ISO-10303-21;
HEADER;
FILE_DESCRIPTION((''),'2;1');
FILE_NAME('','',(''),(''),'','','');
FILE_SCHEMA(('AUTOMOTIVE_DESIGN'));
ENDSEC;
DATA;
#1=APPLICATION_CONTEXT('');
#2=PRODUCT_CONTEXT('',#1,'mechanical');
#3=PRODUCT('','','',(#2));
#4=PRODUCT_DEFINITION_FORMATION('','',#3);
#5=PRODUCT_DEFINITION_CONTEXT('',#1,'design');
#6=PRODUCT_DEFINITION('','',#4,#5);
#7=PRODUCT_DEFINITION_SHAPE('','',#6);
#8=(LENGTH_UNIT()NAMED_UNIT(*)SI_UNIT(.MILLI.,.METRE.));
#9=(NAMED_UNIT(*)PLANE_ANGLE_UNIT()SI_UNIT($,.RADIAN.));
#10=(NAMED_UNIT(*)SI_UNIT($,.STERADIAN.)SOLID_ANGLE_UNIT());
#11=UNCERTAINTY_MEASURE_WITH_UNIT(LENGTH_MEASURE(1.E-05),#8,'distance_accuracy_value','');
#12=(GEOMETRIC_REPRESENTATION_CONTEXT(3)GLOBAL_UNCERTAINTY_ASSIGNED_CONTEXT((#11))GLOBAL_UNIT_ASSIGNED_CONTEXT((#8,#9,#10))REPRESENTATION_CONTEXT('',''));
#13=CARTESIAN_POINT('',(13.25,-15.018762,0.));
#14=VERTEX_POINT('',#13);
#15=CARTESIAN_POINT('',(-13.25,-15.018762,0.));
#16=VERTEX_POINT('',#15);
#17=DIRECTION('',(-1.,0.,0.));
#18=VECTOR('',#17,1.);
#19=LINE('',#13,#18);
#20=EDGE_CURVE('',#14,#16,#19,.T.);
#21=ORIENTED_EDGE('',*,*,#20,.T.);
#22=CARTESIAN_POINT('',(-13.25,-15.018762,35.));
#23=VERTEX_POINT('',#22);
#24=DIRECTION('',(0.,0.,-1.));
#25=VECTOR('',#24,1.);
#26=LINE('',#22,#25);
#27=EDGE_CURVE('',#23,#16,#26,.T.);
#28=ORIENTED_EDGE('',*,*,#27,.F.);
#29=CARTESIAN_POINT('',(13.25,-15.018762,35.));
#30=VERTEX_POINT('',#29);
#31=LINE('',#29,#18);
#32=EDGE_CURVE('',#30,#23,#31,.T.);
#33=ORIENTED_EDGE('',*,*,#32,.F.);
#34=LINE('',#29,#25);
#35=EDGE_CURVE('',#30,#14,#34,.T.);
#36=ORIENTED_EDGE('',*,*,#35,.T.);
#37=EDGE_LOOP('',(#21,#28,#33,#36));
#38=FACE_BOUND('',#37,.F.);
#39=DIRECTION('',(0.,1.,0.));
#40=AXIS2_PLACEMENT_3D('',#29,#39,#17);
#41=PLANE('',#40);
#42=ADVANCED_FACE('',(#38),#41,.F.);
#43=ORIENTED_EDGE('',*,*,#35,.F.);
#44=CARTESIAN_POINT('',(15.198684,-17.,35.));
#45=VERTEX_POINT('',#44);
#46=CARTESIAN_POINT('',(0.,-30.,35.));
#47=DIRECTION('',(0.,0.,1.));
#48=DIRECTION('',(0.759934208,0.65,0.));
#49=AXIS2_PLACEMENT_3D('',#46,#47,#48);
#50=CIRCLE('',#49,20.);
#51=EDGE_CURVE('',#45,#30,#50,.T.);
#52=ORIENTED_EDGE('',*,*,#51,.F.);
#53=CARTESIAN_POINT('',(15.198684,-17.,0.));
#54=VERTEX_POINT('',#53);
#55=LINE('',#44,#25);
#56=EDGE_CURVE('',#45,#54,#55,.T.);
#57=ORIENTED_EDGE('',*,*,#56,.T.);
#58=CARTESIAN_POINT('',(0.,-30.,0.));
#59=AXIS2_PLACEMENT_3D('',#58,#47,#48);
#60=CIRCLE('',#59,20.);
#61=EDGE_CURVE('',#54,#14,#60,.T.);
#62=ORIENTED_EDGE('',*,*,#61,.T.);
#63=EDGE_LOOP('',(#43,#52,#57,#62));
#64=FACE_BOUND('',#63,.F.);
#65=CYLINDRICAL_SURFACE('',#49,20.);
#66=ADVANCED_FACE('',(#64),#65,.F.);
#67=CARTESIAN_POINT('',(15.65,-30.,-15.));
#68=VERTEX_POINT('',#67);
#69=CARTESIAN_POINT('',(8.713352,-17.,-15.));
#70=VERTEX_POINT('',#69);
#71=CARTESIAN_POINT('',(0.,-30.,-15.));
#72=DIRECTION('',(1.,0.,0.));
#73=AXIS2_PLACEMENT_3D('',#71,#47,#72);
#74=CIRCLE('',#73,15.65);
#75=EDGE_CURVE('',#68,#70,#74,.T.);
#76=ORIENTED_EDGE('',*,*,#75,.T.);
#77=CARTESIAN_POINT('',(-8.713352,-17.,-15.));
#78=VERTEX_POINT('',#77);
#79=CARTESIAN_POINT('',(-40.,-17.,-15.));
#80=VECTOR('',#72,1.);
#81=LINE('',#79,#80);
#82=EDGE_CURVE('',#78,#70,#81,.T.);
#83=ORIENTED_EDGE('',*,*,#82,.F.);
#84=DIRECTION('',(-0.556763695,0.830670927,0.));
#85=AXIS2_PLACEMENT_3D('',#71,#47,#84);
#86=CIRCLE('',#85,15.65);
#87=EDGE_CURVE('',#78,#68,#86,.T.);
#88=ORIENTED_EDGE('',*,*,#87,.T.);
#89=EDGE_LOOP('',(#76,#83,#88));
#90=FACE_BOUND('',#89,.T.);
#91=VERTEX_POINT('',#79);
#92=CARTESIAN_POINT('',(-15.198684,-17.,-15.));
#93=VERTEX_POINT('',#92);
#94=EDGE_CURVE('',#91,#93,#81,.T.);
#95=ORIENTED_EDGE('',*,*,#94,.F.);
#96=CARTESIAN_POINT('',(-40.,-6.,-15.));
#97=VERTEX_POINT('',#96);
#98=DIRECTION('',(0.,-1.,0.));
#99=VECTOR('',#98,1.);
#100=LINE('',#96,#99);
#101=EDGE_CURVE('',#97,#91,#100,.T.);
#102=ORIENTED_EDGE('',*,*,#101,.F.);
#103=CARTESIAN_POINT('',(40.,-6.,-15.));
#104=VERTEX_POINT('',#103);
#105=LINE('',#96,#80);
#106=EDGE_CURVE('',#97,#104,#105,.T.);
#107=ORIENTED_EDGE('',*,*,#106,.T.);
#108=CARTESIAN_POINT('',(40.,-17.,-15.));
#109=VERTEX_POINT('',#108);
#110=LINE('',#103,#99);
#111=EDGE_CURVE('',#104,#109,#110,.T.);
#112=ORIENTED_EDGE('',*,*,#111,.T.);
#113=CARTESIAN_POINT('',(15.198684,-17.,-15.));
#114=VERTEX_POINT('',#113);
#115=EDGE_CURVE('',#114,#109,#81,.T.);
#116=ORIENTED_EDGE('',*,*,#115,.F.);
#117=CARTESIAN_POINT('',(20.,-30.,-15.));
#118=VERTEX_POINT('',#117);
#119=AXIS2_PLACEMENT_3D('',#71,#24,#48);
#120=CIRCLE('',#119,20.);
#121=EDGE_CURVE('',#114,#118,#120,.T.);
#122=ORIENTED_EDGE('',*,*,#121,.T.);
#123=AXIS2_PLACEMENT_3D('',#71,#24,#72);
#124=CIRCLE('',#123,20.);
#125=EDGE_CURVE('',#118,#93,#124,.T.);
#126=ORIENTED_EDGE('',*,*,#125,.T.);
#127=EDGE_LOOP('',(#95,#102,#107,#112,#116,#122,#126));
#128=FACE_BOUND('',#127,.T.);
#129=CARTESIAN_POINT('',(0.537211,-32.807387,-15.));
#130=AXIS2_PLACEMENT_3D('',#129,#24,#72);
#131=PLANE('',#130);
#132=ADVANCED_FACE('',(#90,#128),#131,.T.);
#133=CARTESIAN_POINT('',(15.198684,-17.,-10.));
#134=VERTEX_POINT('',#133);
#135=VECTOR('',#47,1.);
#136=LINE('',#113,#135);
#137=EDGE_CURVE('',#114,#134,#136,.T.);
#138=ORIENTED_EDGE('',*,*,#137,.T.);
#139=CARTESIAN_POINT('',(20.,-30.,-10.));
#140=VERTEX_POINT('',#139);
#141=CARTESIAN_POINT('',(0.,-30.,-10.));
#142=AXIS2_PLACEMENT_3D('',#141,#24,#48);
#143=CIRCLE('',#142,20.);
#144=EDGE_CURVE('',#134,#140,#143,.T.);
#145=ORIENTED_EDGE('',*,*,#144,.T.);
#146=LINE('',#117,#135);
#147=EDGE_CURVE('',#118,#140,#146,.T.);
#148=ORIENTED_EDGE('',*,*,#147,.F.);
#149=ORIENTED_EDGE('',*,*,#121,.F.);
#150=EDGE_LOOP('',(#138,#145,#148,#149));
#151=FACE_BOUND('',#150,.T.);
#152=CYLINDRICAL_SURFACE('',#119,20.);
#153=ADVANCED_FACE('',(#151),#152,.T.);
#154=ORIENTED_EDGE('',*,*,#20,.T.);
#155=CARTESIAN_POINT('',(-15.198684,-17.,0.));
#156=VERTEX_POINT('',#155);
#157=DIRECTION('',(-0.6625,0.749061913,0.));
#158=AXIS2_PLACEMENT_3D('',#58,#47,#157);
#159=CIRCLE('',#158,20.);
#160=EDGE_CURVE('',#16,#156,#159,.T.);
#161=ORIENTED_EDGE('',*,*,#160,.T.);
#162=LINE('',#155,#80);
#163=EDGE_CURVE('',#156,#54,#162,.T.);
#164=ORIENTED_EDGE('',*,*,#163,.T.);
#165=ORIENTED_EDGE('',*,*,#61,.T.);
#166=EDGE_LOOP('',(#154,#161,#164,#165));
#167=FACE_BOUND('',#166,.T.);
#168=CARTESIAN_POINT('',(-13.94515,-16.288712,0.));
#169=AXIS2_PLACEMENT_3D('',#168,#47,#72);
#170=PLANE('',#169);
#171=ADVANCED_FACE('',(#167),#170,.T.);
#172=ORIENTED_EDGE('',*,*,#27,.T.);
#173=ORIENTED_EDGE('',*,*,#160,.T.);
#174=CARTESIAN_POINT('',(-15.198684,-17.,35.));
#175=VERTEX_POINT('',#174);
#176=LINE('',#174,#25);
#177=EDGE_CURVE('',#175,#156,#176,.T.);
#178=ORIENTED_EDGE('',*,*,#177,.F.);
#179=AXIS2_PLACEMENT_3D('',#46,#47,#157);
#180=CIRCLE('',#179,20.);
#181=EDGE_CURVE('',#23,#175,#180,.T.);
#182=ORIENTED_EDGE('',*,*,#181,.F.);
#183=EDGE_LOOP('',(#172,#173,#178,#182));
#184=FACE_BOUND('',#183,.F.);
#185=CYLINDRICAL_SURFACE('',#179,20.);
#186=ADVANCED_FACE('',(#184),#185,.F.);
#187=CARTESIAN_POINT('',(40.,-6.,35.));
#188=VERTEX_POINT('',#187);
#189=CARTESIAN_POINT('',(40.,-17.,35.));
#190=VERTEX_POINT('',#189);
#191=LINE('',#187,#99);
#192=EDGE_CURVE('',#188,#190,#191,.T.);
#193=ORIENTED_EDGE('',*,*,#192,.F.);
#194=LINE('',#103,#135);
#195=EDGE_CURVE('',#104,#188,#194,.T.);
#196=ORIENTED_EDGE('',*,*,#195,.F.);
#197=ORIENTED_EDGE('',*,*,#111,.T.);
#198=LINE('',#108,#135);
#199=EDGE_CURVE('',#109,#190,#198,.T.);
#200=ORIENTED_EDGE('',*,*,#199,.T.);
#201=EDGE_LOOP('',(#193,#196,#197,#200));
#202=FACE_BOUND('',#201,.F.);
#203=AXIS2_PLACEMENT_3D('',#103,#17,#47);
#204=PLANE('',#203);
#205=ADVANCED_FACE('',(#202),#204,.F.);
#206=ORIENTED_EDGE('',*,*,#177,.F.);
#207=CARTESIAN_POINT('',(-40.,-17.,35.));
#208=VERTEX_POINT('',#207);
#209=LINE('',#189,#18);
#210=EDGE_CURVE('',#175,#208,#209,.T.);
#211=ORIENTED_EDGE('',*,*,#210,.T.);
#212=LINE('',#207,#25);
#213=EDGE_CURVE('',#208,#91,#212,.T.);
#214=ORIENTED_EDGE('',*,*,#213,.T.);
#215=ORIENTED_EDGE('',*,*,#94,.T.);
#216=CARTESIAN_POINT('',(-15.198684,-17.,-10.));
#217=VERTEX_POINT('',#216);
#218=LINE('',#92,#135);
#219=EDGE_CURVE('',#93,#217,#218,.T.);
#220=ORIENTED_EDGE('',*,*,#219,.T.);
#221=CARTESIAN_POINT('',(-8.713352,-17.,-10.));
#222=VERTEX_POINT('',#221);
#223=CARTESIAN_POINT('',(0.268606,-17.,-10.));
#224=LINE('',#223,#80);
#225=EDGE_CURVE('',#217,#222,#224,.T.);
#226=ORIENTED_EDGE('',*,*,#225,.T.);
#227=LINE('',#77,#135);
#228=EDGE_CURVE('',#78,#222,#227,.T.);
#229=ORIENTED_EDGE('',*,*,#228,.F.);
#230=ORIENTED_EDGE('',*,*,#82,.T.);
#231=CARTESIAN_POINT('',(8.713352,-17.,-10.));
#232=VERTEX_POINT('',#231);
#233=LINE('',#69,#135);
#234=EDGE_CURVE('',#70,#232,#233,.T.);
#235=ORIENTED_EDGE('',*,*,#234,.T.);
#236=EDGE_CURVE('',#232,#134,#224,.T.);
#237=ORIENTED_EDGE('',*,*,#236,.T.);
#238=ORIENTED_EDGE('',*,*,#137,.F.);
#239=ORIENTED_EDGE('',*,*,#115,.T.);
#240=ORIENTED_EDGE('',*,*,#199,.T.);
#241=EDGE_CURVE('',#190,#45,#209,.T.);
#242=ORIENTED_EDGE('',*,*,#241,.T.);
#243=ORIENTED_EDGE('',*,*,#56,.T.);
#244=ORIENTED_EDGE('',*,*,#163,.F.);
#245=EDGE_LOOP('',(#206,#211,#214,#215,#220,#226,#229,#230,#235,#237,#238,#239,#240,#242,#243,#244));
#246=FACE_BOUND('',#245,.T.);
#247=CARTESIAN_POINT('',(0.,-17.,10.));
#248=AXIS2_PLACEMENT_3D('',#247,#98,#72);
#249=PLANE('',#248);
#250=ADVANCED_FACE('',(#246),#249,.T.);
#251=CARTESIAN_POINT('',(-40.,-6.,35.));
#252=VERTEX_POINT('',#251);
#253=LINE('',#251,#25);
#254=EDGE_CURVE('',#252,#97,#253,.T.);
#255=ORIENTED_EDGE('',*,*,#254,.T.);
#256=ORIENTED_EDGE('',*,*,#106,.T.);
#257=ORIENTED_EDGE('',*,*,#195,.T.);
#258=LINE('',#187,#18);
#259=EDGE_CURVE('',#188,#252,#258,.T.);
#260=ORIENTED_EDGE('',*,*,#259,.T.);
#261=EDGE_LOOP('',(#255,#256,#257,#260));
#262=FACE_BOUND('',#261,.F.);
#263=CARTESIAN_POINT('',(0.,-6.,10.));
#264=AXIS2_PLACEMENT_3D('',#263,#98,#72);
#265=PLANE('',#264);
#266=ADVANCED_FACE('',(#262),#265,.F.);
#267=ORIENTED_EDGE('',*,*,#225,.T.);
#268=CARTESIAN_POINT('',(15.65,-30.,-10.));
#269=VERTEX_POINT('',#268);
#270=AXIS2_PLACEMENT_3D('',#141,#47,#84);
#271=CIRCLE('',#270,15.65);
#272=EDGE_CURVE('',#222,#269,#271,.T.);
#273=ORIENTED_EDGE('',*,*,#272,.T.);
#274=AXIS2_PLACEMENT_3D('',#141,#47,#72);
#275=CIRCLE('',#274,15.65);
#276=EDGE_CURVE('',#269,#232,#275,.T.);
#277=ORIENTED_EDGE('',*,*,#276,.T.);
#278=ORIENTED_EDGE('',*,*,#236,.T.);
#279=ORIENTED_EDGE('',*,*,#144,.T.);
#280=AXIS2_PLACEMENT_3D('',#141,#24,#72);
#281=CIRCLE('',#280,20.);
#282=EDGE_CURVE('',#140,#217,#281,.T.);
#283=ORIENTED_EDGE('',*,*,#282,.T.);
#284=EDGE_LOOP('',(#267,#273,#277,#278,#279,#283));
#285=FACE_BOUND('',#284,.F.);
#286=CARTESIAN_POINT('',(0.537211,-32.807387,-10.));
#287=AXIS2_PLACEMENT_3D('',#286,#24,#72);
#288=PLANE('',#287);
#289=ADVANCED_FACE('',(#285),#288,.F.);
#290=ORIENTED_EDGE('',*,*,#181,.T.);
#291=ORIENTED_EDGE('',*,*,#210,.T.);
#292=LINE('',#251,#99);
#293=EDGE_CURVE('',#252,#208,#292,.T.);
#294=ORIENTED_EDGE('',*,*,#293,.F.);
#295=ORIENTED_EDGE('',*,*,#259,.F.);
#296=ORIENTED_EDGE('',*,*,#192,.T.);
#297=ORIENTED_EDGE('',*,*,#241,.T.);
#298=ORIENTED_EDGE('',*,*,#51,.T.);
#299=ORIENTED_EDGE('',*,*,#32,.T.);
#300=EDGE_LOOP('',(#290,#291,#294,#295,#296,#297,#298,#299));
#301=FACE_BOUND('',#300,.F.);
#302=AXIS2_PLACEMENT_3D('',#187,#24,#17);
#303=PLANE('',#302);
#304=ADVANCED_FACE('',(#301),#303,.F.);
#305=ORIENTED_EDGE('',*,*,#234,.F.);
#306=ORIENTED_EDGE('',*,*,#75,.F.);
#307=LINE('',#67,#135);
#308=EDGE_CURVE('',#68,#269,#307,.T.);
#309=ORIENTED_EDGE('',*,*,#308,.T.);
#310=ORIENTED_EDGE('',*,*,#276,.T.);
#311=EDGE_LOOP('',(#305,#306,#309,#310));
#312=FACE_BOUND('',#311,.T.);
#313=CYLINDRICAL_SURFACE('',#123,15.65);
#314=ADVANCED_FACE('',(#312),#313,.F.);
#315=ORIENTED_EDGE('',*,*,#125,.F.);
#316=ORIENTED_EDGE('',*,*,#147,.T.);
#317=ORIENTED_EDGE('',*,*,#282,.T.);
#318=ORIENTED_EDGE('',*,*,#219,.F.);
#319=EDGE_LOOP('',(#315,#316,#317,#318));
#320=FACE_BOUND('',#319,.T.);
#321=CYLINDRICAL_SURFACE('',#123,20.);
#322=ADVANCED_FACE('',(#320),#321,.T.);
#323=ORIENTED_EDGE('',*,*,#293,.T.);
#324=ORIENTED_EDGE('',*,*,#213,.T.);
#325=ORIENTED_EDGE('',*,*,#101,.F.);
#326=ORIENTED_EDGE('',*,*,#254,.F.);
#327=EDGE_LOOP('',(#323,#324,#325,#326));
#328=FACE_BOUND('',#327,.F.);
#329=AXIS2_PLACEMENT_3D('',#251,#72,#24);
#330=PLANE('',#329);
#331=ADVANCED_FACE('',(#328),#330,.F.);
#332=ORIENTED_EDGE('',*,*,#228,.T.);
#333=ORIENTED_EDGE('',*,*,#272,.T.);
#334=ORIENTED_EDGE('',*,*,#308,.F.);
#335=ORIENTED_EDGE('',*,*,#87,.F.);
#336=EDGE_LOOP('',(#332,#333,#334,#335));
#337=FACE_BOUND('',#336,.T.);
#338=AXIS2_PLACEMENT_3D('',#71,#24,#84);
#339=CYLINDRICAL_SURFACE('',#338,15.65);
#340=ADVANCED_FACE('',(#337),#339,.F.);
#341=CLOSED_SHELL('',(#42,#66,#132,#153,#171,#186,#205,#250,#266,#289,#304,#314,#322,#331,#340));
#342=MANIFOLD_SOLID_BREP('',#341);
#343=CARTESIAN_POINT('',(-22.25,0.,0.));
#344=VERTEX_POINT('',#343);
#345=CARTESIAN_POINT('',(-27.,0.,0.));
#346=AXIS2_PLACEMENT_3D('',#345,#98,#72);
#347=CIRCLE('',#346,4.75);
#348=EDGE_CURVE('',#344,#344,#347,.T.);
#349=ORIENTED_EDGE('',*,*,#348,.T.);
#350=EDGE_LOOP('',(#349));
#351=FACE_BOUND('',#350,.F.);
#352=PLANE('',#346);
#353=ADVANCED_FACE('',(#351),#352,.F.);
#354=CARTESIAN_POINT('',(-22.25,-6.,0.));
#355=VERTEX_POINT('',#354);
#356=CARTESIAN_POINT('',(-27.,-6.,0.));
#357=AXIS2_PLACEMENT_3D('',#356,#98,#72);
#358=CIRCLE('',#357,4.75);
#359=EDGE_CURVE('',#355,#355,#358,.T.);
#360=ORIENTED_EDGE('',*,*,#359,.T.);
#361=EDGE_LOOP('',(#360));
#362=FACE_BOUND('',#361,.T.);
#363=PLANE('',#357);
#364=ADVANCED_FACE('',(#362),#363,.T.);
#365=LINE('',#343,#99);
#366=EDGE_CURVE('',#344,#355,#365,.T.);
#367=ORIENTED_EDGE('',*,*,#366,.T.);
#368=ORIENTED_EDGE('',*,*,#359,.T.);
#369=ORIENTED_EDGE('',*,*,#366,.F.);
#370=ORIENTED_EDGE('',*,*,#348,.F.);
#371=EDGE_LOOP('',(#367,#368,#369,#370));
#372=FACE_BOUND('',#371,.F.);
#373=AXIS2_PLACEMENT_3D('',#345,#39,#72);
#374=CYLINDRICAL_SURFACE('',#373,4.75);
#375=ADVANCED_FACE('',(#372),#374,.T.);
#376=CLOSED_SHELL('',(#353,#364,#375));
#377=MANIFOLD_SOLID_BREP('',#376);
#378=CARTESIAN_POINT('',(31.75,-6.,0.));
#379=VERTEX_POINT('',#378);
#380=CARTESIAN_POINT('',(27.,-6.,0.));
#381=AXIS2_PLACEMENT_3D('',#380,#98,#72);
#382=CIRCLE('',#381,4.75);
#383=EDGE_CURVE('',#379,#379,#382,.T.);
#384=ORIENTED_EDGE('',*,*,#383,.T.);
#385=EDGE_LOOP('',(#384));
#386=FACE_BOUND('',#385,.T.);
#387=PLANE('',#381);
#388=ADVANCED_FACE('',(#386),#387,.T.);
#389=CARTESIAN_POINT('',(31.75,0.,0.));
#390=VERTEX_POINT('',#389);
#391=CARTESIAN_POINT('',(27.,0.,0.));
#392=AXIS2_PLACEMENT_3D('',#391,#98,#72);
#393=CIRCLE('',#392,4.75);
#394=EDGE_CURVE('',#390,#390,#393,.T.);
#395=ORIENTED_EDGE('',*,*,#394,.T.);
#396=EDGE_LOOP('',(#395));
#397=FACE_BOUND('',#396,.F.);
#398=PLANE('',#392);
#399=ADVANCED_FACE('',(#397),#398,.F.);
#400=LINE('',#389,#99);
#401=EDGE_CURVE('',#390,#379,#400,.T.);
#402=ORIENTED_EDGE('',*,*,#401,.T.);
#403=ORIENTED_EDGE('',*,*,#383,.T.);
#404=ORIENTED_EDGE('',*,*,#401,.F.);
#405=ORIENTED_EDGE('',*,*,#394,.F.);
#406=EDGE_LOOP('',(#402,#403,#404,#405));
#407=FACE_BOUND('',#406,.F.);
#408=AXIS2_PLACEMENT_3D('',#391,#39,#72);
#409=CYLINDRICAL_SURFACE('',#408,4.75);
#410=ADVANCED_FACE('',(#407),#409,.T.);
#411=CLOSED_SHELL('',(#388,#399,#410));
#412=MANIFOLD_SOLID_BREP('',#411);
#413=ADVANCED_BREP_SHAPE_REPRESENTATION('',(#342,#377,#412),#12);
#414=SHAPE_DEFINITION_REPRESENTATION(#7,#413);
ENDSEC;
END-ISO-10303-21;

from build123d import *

# Parameters (mm, degrees)
F0_R     = 4.75
F1_DEPTH = 6
F2_R     = 4.75
F3_DEPTH = 11
F5_DEPTH = 5
F7_DEPTH = 35


with BuildPart() as f1:
    # F0 (on Front) → F1 (new body)
    with BuildSketch(Plane.XZ):
        with Locations((-27, 0)):
            Circle(F0_R)
    extrude(amount=F1_DEPTH)


with BuildPart() as f1b:
    # F0 (on Front) → F1, piece 2 (new body)
    with BuildSketch(Plane.XZ):
        with Locations((27, 0)):
            Circle(F0_R)
    extrude(amount=F1_DEPTH)


with BuildPart() as f3:
    # F2 (on face) → F3 (new body)
    with BuildSketch(Plane.XZ.offset(6)):
        Polygon((-40, -15), (40, -15), (40, 15), (40, 35), (-40, 35), (-40, 15), align=None)
        with Locations((-27, 0)):
            Circle(F2_R, mode=Mode.SUBTRACT)
        with Locations((-27, 0)):
            Circle(F2_R)
    extrude(amount=F3_DEPTH)

    # F4 (on face) → F5 (join)
    with BuildSketch(Plane(origin=(0, 0, -15), x_dir=(1, 0, 0), z_dir=(0, 0, -1))):
        with BuildLine():
            ThreePointArc((-8.7133518235, 17), (-7.3674467749, 43.8073613706), (15.65, 30))
            ThreePointArc((15.65, 30), (13.8073613706, 22.6325532251), (8.7133518235, 17))
            Line((8.7133518235, 17), (15.1986841536, 17))
            ThreePointArc((15.1986841536, 17), (18.7613123618, 23.0708472044), (20, 30))
            ThreePointArc((20, 30), (-6.9291527956, 48.7613123618), (-15.1986841536, 17))
            Line((-15.1986841536, 17), (-8.7133518235, 17))
        make_face()
        with BuildLine():
            ThreePointArc((8.7133518235, 17), (0, 14.35), (-8.7133518235, 17))
            Line((-8.7133518235, 17), (-15.1986841536, 17))
            ThreePointArc((-15.1986841536, 17), (0, 10), (15.1986841536, 17))
            Line((15.1986841536, 17), (8.7133518235, 17))
        make_face()
    extrude(amount=-F5_DEPTH)

    # F6 (on face) → F7 (cut)
    with BuildSketch(Plane.XY.offset(35)):
        with BuildLine():
            ThreePointArc((-13.25, -15.0187617334), (-14.2587949626, -15.975494083), (-15.1986841536, -17))
            Line((-15.1986841536, -17), (-13.25, -17))
            Line((-13.25, -17), (-13.25, -15.0187617334))
        make_face()
        Polygon((8.7133518235, -17), (13.25, -17), (13.25, -15.0187617334), (-13.25, -15.0187617334), (-13.25, -17), (-8.7133518235, -17), align=None)
        with BuildLine():
            Line((13.25, -17), (15.1986841536, -17))
            ThreePointArc((15.1986841536, -17), (14.2587949626, -15.975494083), (13.25, -15.0187617334))
            Line((13.25, -15.0187617334), (13.25, -17))
        make_face()
    extrude(amount=-F7_DEPTH, mode=Mode.SUBTRACT)


solid = Compound([f1.part, f1b.part, f3.part])
